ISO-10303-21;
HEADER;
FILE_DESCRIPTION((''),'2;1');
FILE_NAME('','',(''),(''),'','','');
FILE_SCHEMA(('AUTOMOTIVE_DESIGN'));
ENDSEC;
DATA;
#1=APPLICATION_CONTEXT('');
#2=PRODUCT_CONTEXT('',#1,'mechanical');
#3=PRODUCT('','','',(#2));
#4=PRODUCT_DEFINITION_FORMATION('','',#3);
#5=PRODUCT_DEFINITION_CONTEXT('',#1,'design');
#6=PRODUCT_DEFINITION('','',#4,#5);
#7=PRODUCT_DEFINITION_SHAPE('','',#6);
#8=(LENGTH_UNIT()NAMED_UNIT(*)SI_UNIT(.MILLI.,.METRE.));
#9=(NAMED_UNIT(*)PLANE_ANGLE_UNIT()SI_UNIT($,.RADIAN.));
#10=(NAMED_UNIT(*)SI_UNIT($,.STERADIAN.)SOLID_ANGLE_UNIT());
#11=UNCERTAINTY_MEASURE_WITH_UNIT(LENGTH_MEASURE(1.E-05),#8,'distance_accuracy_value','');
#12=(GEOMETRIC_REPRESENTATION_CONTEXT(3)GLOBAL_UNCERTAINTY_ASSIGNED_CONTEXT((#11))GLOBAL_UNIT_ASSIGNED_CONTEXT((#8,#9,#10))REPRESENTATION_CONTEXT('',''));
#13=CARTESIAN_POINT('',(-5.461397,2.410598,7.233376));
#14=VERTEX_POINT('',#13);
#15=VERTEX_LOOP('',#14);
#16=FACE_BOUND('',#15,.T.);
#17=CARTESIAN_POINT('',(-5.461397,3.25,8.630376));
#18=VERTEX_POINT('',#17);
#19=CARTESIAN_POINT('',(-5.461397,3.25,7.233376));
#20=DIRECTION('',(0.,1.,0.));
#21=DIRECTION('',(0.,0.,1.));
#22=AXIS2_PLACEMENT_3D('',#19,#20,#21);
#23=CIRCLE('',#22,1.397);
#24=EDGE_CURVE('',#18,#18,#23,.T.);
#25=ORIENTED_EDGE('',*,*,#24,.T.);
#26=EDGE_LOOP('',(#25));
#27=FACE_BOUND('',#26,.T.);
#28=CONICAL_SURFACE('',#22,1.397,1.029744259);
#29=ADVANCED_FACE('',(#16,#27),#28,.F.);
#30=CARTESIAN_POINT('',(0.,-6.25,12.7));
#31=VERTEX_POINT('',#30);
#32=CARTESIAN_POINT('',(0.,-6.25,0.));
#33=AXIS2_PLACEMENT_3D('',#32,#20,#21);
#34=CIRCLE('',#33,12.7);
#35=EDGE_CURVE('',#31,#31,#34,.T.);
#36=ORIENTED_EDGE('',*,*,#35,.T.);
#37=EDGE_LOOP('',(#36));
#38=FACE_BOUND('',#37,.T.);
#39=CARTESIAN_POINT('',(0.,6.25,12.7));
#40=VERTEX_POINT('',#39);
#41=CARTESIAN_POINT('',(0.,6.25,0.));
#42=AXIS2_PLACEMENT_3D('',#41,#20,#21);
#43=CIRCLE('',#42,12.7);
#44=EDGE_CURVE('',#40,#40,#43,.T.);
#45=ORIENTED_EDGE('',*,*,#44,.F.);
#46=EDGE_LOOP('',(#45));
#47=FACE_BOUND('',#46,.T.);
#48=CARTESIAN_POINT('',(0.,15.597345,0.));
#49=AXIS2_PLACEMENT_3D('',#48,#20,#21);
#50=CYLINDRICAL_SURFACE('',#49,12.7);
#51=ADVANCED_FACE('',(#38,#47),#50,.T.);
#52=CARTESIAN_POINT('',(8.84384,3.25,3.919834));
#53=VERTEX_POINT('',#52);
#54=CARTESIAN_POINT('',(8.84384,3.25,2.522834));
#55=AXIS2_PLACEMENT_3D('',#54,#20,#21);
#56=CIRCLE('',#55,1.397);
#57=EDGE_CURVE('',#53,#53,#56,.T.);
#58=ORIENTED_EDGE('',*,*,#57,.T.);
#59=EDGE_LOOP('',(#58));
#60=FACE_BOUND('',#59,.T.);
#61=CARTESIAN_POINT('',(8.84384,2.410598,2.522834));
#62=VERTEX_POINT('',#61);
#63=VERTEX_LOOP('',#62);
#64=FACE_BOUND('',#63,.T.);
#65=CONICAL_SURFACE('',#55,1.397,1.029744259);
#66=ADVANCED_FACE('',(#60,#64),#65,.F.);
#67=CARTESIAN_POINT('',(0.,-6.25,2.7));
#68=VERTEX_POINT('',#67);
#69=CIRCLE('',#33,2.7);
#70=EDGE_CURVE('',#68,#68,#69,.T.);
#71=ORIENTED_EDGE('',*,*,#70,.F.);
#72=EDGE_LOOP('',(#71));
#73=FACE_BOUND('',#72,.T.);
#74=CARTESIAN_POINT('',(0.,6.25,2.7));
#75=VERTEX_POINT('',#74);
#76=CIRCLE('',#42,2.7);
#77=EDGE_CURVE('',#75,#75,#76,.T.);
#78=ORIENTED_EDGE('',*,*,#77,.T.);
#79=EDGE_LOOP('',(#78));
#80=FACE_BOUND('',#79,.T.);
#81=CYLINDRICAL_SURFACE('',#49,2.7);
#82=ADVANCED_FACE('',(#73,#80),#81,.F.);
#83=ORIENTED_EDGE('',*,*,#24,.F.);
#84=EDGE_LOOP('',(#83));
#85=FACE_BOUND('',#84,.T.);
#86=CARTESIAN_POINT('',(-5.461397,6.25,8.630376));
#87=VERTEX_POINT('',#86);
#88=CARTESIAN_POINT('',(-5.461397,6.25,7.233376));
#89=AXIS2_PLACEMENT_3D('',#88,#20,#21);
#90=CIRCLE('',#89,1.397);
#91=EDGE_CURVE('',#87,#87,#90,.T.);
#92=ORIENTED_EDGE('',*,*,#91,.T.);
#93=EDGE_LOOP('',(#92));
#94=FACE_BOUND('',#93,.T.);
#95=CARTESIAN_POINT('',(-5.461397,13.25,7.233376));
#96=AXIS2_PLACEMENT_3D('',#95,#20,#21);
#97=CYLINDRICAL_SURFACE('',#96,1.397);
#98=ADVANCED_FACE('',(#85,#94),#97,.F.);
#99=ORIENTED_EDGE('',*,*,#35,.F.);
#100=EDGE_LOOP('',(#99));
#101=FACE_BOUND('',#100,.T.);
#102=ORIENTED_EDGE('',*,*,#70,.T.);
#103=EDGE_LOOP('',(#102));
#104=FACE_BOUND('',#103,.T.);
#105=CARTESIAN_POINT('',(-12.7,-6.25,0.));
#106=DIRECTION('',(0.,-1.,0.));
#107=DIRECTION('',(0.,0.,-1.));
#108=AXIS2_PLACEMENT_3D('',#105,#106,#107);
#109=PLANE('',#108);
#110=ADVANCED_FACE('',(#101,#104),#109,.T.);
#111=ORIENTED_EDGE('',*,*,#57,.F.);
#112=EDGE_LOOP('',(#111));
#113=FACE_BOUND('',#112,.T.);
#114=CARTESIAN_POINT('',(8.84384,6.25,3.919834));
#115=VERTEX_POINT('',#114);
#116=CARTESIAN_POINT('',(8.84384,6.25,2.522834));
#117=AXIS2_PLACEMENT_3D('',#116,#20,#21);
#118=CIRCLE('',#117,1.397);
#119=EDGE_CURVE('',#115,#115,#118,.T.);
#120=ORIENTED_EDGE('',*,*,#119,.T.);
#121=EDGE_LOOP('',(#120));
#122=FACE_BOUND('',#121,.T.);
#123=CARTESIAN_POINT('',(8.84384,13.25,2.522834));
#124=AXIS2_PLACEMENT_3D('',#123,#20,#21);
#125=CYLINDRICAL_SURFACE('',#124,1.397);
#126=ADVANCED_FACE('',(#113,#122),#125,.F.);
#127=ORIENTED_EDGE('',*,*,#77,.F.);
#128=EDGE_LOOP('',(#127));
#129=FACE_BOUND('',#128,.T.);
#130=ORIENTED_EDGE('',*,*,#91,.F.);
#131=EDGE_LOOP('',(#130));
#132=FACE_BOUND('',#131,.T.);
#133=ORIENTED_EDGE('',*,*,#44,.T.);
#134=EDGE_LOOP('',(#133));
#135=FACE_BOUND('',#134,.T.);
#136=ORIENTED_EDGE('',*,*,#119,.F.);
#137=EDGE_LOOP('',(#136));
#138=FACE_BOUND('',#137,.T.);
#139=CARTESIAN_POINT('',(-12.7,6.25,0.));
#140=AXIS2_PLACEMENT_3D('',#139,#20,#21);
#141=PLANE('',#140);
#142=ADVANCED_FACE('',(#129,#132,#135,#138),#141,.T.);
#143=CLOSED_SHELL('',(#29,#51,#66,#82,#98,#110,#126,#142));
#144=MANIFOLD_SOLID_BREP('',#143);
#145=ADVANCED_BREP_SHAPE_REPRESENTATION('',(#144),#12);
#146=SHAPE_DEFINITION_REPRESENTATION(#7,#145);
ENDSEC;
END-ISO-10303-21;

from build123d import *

# Parameters (mm, degrees)
CROQUIS1_W = 10
CROQUIS1_H = 12.5


# Read off the part's stored shape, not the designer's step: Taladro de margen para #31
with BuildPart() as part:
    # Croquis1 → Revolución1 (revolve)
    with BuildSketch(Plane.XY, mode=Mode.PRIVATE) as revoluci_n1_sk:
        with Locations((-7.7, 0)):
            Rectangle(CROQUIS1_W, CROQUIS1_H)
    revolve(revoluci_n1_sk.sketch.rotate(Axis((0, 15.597345133, 0), (0, -1, 0)), 270), axis=Axis((0, 15.597345133, 0), (0, -1, 0)))

    # Taladro de margen para #31 outline → Taladro de margen para #31 (revolve, cut)
    with BuildSketch(Plane(origin=(8.843839823, 0, 2.522833733), x_dir=(1, 0, 0), z_dir=(0, 0, 1))):
        Polygon((0, 6.25), (0, 2.410597715), (1.397, 3.25), (1.397, 6.25), align=None)
    revolve(axis=Axis((8.843839823, 0, 2.522833733), (0, 1, 0)), mode=Mode.SUBTRACT)

    # Taladro de margen para _31 2 outline → Taladro de margen para _31 2 (revolve, cut)
    with BuildSketch(Plane(origin=(-5.461397488, 0, 7.233375916), x_dir=(1, 0, 0), z_dir=(0, 0, 1))):
        Polygon((0, 6.25), (0, 2.410597715), (1.397, 3.25), (1.397, 6.25), align=None)
    revolve(axis=Axis((-5.461397488, 0, 7.233375916), (0, 1, 0)), mode=Mode.SUBTRACT)


solid = part.part
